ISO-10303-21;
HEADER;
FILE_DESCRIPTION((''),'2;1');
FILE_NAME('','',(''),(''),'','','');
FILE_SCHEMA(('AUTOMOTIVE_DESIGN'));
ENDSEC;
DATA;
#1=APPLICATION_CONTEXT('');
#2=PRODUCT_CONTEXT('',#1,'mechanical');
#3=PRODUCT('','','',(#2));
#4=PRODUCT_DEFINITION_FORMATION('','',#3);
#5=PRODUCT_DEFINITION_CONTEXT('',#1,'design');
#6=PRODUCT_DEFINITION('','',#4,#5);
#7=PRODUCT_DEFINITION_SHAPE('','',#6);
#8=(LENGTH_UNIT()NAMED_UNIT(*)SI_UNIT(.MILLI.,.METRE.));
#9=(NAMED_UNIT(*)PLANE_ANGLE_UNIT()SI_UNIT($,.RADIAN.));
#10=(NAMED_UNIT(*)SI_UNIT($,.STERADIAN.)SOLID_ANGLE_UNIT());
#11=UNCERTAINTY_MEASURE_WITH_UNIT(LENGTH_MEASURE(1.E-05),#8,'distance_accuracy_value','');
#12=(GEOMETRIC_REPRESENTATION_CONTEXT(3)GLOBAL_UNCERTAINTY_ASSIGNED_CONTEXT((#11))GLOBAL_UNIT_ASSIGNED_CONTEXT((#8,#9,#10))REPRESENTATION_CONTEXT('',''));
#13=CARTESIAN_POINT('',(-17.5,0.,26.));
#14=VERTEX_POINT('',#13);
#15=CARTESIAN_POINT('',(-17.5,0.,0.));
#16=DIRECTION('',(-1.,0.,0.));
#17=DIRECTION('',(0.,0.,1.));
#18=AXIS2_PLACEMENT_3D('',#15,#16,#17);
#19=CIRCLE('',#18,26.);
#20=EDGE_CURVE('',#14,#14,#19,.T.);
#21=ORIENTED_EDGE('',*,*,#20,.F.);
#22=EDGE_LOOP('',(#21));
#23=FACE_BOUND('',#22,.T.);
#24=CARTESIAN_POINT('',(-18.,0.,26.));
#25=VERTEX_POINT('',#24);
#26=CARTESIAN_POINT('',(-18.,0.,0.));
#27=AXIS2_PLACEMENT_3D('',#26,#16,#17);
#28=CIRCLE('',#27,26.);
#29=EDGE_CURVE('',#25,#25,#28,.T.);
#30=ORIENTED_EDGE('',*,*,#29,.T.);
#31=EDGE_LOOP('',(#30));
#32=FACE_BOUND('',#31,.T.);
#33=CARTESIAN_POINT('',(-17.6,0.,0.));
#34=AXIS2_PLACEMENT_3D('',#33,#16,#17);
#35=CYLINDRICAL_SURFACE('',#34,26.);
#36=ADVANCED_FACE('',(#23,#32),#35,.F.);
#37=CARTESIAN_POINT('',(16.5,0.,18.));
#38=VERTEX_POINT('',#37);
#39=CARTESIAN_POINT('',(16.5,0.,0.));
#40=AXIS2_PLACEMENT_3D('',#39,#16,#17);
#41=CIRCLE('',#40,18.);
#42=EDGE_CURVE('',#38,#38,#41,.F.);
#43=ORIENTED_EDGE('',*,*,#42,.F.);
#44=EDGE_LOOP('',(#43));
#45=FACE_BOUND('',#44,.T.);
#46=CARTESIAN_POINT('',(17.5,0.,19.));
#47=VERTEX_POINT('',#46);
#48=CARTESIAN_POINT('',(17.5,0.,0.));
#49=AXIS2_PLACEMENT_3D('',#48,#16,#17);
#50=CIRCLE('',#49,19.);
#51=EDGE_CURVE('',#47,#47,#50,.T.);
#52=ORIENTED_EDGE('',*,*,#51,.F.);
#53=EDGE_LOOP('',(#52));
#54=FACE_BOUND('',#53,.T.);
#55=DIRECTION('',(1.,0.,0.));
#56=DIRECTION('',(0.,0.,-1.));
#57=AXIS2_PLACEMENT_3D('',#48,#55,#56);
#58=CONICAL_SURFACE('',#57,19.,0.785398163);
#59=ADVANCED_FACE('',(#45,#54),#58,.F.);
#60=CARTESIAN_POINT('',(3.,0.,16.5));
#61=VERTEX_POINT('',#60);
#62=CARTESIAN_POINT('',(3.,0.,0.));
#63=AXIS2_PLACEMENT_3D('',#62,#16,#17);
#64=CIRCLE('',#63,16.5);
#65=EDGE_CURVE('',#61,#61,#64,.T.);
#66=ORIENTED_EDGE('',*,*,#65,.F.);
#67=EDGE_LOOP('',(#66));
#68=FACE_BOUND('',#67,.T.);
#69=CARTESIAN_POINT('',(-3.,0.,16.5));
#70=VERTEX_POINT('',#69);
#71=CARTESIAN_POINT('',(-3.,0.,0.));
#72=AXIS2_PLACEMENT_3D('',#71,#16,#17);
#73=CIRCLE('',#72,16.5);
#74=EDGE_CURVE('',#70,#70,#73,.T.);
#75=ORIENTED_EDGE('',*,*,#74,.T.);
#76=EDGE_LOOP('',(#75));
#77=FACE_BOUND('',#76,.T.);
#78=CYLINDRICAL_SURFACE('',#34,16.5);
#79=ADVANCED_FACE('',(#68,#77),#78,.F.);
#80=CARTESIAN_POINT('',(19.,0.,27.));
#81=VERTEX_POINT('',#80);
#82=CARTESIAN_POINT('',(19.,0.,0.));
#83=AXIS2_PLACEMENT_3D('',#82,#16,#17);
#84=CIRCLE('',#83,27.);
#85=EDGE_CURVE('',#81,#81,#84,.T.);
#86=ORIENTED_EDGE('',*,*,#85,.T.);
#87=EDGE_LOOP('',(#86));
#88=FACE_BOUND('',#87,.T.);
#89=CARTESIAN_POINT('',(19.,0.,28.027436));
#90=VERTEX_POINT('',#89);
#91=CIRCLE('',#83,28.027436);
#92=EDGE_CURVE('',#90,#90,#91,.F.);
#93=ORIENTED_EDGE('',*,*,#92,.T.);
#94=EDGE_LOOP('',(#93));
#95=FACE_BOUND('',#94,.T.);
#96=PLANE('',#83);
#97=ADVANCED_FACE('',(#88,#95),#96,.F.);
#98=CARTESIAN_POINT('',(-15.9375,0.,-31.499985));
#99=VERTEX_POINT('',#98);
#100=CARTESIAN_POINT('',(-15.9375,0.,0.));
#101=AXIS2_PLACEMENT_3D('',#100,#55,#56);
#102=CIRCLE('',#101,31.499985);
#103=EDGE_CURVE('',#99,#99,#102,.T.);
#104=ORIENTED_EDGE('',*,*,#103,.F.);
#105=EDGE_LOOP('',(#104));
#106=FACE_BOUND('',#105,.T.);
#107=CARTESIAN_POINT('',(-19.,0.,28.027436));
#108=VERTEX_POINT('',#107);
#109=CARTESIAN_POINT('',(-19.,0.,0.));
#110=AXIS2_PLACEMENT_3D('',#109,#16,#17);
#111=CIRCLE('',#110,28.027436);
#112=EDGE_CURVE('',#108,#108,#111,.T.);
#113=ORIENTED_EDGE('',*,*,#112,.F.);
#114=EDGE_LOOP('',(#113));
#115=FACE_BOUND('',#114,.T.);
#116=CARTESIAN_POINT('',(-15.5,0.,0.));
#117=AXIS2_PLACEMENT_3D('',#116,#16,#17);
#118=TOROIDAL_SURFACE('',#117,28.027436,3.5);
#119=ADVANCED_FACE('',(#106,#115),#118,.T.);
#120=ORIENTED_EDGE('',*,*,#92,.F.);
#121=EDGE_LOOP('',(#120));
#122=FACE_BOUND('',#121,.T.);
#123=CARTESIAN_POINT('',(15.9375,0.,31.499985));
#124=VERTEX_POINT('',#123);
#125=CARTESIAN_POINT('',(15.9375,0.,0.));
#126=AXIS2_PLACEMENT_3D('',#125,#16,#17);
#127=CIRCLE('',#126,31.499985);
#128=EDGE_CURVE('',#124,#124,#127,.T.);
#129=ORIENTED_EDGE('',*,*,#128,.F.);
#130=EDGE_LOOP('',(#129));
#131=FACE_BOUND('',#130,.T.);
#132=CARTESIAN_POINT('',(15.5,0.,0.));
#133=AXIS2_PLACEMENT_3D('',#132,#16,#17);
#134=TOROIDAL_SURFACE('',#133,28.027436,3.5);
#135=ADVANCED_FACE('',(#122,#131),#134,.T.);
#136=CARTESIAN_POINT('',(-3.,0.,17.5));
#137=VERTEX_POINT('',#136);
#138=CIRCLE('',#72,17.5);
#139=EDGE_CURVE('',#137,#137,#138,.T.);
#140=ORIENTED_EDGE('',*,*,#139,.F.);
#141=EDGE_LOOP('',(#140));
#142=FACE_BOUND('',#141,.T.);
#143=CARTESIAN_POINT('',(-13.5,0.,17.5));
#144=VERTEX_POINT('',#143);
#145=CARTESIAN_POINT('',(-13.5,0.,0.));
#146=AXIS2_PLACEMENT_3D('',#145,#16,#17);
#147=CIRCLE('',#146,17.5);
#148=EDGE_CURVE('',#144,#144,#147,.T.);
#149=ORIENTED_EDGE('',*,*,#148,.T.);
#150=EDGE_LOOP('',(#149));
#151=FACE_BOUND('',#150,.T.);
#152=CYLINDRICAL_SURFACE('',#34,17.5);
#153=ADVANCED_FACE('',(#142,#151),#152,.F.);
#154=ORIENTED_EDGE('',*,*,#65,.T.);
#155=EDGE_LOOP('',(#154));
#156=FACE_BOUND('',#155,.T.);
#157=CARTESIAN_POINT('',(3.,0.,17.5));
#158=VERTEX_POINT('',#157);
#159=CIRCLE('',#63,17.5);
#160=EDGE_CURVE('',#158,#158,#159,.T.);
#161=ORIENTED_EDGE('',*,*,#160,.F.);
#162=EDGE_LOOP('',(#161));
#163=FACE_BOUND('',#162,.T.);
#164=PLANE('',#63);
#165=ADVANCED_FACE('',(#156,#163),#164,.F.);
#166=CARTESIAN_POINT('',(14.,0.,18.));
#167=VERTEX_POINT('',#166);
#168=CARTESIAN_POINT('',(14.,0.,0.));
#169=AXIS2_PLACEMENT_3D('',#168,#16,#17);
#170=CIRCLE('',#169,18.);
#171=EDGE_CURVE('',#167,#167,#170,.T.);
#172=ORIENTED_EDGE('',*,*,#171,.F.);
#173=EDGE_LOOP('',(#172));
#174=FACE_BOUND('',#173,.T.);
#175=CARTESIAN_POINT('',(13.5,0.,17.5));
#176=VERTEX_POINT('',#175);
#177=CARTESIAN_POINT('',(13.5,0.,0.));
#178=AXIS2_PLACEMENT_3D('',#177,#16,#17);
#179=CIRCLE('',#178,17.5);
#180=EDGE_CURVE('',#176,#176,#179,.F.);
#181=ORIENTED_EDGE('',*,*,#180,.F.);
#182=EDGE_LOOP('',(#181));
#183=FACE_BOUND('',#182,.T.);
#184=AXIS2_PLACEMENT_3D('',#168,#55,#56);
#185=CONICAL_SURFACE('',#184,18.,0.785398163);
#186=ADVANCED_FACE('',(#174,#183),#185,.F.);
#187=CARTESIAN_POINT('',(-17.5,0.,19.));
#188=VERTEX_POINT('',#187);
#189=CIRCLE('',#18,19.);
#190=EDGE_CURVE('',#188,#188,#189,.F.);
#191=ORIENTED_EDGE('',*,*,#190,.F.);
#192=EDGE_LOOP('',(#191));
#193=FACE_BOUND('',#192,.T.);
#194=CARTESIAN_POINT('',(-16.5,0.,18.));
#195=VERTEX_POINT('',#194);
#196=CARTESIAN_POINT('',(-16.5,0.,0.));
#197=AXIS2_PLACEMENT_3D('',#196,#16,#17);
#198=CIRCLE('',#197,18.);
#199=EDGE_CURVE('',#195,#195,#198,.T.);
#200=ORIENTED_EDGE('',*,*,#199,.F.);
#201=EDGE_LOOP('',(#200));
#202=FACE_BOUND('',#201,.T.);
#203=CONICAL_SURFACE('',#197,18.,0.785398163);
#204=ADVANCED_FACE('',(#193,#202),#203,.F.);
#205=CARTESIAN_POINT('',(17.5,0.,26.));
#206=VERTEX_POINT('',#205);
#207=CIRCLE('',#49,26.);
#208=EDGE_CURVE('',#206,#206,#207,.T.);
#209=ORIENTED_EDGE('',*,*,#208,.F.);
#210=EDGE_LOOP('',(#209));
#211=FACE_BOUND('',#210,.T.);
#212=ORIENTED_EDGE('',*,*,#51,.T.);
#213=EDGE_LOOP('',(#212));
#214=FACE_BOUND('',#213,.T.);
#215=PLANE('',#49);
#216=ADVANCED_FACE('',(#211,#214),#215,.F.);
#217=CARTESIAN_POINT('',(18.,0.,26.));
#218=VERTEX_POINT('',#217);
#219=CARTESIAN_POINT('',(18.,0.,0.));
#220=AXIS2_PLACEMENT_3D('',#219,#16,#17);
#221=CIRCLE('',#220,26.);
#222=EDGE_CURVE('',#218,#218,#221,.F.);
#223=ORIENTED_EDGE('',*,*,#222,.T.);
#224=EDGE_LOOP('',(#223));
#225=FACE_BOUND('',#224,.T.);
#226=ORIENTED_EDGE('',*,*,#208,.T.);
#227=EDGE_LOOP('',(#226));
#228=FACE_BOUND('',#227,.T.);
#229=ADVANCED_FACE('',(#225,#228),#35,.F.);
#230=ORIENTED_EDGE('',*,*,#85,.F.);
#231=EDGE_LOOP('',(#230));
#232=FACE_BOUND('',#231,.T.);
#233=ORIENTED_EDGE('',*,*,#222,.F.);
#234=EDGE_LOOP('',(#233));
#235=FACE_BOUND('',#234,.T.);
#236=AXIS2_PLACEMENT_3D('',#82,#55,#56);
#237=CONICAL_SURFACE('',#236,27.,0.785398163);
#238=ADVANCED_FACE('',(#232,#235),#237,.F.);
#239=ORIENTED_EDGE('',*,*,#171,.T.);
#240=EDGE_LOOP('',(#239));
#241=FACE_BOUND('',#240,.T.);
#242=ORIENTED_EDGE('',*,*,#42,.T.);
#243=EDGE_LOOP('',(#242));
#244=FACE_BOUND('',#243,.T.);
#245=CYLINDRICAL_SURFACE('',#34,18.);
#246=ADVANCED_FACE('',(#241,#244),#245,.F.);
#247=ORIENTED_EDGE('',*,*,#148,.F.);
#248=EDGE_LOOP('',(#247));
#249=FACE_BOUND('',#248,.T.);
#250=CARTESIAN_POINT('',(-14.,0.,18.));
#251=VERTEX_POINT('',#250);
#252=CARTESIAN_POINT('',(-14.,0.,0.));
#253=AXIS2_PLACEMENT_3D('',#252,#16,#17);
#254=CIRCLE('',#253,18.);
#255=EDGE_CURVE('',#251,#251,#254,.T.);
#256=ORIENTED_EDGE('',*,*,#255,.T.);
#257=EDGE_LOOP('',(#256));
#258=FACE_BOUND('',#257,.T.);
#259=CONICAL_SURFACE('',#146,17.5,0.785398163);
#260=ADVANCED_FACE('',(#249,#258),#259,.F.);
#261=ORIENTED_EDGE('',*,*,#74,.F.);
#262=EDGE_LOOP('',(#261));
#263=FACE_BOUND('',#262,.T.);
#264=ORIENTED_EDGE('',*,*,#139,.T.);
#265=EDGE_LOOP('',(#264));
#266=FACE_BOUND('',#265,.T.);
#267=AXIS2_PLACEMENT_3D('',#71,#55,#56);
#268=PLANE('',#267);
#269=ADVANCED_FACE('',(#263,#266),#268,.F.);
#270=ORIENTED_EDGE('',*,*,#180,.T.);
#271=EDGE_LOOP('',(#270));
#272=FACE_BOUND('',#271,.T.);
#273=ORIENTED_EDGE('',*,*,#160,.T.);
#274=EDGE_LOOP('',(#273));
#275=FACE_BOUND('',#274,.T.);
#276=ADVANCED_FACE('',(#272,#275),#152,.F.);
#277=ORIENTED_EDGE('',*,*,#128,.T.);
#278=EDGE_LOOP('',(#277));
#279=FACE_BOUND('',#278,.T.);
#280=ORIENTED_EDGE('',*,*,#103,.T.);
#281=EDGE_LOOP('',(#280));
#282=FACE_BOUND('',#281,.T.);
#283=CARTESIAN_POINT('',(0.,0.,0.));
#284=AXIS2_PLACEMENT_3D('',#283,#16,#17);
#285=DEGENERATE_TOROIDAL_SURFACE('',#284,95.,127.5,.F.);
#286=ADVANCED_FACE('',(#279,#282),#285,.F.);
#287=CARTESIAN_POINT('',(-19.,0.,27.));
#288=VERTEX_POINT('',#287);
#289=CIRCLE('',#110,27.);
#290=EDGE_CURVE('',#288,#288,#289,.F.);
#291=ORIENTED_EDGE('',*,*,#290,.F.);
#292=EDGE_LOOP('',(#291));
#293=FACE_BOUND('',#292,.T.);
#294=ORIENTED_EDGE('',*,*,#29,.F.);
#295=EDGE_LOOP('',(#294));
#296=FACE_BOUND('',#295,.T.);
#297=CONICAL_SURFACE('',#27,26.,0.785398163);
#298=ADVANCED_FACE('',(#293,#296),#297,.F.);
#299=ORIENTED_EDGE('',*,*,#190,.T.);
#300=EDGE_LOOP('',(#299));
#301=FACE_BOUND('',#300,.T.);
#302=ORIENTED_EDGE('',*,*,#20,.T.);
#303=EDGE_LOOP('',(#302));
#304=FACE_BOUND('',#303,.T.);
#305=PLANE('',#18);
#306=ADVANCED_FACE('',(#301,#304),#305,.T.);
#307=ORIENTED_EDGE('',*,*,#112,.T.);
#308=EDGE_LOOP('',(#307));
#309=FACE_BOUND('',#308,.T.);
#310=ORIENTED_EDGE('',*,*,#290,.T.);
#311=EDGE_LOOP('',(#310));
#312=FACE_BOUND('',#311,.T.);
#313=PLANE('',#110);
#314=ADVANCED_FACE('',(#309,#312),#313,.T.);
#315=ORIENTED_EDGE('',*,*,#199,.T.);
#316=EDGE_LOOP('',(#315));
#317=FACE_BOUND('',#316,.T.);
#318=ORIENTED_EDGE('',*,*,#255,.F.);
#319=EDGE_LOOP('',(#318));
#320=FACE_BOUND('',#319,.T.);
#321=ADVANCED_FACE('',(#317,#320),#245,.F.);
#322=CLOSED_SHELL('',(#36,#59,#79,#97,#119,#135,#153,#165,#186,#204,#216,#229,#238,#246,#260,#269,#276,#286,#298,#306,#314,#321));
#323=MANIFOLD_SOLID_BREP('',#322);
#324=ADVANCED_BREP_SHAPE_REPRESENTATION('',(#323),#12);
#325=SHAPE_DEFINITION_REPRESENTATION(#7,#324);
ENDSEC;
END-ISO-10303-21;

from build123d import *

# Parameters (mm, degrees)
CHAMFER1_SIZE = 1
CHAMFER2_SIZE = 0.5
FILLET1_R     = 3.5


with BuildPart() as part:
    # Sketch1 → Revolve1 (revolve)
    with BuildSketch(Plane.XY, mode=Mode.PRIVATE) as revolve1_sk:
        Polygon((-14, 17.5), (-3, 17.5), (-3, 16.5), (3, 16.5), (3, 17.5), (14, 17.5), (14, 18), (17.5, 18), (17.5, 26), (19, 26), (19, 32.5), (-19, 32.5), (-19, 26), (-17.5, 26), (-17.5, 18), (-14, 18), align=None)
    revolve(revolve1_sk.sketch.rotate(Axis((-17.6, 0, 0), (1, 0, 0)), 90), axis=Axis((-17.6, 0, 0), (1, 0, 0)))

    # Sketch2 → Cut-Revolve1 (revolve, cut)
    with BuildSketch(Plane.XY):
        with BuildLine():
            Line((-19, 46.076365747), (19, 46.076365747))
            Line((19, 46.076365747), (19, 31.076365747))
            ThreePointArc((19, 31.076365747), (0, 32.5), (-19, 31.076365747))
            Line((-19, 31.076365747), (-19, 46.076365747))
        make_face()
    revolve(axis=Axis((-17.6, 0, 0), (1, 0, 0)), mode=Mode.SUBTRACT)

    # Chamfer1
    chamfer1_edges = [part.edges().sort_by_distance(p)[0] for p in [
        (-19, 0, -26),
        (19, 0, -26),
        (17.5, 0, -18),
        (-17.5, 0, -18),
    ]]
    chamfer(chamfer1_edges, length=CHAMFER1_SIZE)

    # Chamfer2
    chamfer2_edges = [part.edges().sort_by_distance(p)[0] for p in [
        (14, 0, -17.5),
        (-14, 0, -17.5),
    ]]
    chamfer(chamfer2_edges, length=CHAMFER2_SIZE - 0.0001)  # a hair under: the kernel refuses the full size

    # Fillet1
    fillet1_edges = [part.edges().sort_by_distance(p)[0] for p in [
        (-19, -31.076365747, 0),
        (19, -31.076365747, 0),
    ]]
    fillet(fillet1_edges, radius=FILLET1_R)


solid = part.part
